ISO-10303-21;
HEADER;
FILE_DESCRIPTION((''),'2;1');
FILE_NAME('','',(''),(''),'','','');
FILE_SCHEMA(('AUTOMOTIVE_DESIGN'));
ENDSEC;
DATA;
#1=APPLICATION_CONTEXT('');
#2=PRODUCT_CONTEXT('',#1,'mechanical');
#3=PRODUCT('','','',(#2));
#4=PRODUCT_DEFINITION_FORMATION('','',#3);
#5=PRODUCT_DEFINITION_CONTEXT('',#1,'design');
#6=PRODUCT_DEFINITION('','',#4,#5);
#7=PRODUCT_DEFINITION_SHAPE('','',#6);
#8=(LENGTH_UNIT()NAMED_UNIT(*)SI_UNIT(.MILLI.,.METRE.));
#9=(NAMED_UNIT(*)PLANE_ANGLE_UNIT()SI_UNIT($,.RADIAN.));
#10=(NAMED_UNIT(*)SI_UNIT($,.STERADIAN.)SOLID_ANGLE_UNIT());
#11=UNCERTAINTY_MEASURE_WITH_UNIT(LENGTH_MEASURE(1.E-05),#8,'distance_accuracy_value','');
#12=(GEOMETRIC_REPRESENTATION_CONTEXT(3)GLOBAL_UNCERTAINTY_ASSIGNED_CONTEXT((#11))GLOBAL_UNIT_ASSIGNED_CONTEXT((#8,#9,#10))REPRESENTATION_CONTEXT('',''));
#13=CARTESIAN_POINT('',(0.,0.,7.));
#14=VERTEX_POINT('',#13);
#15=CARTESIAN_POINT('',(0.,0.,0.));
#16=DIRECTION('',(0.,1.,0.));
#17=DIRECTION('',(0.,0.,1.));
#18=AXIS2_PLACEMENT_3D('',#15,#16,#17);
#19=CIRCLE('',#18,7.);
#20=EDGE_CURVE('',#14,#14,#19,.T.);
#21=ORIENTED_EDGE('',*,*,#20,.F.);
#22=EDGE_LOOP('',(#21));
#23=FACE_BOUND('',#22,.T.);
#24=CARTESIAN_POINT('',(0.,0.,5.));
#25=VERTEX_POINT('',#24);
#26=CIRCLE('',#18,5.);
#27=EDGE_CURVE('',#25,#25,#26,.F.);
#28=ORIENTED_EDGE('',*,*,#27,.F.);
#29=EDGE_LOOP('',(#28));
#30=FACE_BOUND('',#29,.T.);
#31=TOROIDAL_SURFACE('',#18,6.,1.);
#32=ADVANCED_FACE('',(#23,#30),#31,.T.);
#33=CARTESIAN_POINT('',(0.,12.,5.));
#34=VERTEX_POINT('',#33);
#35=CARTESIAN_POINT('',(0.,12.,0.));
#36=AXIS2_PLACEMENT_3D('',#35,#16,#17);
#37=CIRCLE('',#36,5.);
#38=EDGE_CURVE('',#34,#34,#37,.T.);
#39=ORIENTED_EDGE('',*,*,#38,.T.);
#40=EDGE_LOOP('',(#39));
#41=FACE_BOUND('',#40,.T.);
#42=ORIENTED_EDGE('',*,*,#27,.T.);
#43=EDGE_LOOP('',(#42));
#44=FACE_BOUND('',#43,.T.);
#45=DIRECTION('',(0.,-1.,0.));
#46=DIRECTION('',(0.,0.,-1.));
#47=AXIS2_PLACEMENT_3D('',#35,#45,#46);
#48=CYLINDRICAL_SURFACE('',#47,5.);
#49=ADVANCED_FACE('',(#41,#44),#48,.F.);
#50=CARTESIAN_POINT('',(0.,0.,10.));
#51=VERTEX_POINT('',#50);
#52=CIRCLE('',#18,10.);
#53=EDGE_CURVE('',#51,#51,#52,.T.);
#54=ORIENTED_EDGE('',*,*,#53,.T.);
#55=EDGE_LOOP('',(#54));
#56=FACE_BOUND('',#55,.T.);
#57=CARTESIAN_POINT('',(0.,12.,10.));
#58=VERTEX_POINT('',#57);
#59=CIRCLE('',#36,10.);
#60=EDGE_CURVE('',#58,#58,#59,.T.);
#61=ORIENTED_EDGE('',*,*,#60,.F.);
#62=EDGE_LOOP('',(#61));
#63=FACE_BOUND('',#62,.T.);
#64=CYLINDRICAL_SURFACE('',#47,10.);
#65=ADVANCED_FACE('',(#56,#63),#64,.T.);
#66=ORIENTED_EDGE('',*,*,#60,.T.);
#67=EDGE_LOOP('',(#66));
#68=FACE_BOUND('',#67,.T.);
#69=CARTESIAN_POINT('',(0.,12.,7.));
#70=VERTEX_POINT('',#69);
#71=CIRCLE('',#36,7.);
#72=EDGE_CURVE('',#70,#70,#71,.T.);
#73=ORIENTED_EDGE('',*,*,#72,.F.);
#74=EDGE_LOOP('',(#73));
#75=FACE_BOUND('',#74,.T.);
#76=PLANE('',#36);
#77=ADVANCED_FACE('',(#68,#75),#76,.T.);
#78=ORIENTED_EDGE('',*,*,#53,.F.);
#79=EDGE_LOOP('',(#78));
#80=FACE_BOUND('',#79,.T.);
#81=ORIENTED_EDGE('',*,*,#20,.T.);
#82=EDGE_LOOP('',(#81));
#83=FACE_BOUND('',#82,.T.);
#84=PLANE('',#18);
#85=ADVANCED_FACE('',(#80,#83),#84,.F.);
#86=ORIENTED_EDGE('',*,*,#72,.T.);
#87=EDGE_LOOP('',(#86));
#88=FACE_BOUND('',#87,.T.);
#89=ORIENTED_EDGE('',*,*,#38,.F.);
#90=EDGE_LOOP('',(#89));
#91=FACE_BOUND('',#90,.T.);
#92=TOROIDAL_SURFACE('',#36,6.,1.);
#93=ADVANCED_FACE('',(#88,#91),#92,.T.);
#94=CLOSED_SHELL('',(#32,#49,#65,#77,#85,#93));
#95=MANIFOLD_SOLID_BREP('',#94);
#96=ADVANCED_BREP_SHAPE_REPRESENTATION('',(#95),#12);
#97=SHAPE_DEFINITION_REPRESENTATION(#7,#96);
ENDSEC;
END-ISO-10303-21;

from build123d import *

# Parameters (mm, degrees)
PROFILE_SKETCH_R              = 10
PROFILE_SKETCH_R_2            = 5
CYLINDER_EXTRUDE_DEPTH        = 12
LIP_RING_SKETCH_R             = 7
LIP_RING_SKETCH_R_2           = 5
BOTTOM_LIP_RING_EXTRUDE_DEPTH = 1
BOTTOM_RING_FILLET_R          = 1
TOP_START                     = -13
SKETCH2_2_R                   = 7
SKETCH2_2_R_2                 = 5
TOP_LIP_RING_EXTRUDE_DEPTH    = 1
TOP_RING_FILLET_R             = 1


with BuildPart() as part:
    # Profile Sketch → Cylinder Extrude (new body)
    with BuildSketch(Plane(origin=(0, 0, 0), x_dir=(1, 0, 0), z_dir=(0, 1, 0))):
        with Locations(Location((0, 0, 0), (0, 0, 270))):
            Circle(PROFILE_SKETCH_R)
        with Locations(Location((0, 0, 0), (0, 0, 270))):
            Circle(PROFILE_SKETCH_R_2, mode=Mode.SUBTRACT)
    extrude(amount=CYLINDER_EXTRUDE_DEPTH)

    # Lip Ring Sketch → Bottom Lip Ring Extrude (add)
    with BuildSketch(Plane(origin=(0, 12, 0), x_dir=(1, 0, 0), z_dir=(0, 1, 0))):
        with Locations(Location((0, 0, 0), (0, 0, 270))):
            Circle(LIP_RING_SKETCH_R)
        with Locations(Location((0, 0, 0), (0, 0, 270))):
            Circle(LIP_RING_SKETCH_R_2, mode=Mode.SUBTRACT)
    extrude(amount=BOTTOM_LIP_RING_EXTRUDE_DEPTH)

    # Bottom Ring Fillet
    bottom_ring_fillet_edges = [part.edges().sort_by_distance(p)[0] for p in [
        (0, 13, -7),
        (0, 13, -5),
    ]]
    fillet(bottom_ring_fillet_edges, radius=BOTTOM_RING_FILLET_R - 0.0001)  # a hair under: the kernel refuses the full size

    # Sketch2<2> → Top Lip Ring Extrude (add)
    with BuildSketch(Plane(origin=(0, 12, 0), x_dir=(1, 0, 0), z_dir=(0, 1, 0)).offset(TOP_START)):
        with Locations(Location((0, 0, 0), (0, 0, 270))):
            Circle(SKETCH2_2_R)
        with Locations(Location((0, 0, 0), (0, 0, 270))):
            Circle(SKETCH2_2_R_2, mode=Mode.SUBTRACT)
    extrude(amount=TOP_LIP_RING_EXTRUDE_DEPTH)

    # Top Ring Fillet
    top_ring_fillet_edges = [part.edges().sort_by_distance(p)[0] for p in [
        (0, -1, -7),
        (0, -1, -5),
    ]]
    fillet(top_ring_fillet_edges, radius=TOP_RING_FILLET_R - 0.0001)  # a hair under: the kernel refuses the full size


solid = part.part
